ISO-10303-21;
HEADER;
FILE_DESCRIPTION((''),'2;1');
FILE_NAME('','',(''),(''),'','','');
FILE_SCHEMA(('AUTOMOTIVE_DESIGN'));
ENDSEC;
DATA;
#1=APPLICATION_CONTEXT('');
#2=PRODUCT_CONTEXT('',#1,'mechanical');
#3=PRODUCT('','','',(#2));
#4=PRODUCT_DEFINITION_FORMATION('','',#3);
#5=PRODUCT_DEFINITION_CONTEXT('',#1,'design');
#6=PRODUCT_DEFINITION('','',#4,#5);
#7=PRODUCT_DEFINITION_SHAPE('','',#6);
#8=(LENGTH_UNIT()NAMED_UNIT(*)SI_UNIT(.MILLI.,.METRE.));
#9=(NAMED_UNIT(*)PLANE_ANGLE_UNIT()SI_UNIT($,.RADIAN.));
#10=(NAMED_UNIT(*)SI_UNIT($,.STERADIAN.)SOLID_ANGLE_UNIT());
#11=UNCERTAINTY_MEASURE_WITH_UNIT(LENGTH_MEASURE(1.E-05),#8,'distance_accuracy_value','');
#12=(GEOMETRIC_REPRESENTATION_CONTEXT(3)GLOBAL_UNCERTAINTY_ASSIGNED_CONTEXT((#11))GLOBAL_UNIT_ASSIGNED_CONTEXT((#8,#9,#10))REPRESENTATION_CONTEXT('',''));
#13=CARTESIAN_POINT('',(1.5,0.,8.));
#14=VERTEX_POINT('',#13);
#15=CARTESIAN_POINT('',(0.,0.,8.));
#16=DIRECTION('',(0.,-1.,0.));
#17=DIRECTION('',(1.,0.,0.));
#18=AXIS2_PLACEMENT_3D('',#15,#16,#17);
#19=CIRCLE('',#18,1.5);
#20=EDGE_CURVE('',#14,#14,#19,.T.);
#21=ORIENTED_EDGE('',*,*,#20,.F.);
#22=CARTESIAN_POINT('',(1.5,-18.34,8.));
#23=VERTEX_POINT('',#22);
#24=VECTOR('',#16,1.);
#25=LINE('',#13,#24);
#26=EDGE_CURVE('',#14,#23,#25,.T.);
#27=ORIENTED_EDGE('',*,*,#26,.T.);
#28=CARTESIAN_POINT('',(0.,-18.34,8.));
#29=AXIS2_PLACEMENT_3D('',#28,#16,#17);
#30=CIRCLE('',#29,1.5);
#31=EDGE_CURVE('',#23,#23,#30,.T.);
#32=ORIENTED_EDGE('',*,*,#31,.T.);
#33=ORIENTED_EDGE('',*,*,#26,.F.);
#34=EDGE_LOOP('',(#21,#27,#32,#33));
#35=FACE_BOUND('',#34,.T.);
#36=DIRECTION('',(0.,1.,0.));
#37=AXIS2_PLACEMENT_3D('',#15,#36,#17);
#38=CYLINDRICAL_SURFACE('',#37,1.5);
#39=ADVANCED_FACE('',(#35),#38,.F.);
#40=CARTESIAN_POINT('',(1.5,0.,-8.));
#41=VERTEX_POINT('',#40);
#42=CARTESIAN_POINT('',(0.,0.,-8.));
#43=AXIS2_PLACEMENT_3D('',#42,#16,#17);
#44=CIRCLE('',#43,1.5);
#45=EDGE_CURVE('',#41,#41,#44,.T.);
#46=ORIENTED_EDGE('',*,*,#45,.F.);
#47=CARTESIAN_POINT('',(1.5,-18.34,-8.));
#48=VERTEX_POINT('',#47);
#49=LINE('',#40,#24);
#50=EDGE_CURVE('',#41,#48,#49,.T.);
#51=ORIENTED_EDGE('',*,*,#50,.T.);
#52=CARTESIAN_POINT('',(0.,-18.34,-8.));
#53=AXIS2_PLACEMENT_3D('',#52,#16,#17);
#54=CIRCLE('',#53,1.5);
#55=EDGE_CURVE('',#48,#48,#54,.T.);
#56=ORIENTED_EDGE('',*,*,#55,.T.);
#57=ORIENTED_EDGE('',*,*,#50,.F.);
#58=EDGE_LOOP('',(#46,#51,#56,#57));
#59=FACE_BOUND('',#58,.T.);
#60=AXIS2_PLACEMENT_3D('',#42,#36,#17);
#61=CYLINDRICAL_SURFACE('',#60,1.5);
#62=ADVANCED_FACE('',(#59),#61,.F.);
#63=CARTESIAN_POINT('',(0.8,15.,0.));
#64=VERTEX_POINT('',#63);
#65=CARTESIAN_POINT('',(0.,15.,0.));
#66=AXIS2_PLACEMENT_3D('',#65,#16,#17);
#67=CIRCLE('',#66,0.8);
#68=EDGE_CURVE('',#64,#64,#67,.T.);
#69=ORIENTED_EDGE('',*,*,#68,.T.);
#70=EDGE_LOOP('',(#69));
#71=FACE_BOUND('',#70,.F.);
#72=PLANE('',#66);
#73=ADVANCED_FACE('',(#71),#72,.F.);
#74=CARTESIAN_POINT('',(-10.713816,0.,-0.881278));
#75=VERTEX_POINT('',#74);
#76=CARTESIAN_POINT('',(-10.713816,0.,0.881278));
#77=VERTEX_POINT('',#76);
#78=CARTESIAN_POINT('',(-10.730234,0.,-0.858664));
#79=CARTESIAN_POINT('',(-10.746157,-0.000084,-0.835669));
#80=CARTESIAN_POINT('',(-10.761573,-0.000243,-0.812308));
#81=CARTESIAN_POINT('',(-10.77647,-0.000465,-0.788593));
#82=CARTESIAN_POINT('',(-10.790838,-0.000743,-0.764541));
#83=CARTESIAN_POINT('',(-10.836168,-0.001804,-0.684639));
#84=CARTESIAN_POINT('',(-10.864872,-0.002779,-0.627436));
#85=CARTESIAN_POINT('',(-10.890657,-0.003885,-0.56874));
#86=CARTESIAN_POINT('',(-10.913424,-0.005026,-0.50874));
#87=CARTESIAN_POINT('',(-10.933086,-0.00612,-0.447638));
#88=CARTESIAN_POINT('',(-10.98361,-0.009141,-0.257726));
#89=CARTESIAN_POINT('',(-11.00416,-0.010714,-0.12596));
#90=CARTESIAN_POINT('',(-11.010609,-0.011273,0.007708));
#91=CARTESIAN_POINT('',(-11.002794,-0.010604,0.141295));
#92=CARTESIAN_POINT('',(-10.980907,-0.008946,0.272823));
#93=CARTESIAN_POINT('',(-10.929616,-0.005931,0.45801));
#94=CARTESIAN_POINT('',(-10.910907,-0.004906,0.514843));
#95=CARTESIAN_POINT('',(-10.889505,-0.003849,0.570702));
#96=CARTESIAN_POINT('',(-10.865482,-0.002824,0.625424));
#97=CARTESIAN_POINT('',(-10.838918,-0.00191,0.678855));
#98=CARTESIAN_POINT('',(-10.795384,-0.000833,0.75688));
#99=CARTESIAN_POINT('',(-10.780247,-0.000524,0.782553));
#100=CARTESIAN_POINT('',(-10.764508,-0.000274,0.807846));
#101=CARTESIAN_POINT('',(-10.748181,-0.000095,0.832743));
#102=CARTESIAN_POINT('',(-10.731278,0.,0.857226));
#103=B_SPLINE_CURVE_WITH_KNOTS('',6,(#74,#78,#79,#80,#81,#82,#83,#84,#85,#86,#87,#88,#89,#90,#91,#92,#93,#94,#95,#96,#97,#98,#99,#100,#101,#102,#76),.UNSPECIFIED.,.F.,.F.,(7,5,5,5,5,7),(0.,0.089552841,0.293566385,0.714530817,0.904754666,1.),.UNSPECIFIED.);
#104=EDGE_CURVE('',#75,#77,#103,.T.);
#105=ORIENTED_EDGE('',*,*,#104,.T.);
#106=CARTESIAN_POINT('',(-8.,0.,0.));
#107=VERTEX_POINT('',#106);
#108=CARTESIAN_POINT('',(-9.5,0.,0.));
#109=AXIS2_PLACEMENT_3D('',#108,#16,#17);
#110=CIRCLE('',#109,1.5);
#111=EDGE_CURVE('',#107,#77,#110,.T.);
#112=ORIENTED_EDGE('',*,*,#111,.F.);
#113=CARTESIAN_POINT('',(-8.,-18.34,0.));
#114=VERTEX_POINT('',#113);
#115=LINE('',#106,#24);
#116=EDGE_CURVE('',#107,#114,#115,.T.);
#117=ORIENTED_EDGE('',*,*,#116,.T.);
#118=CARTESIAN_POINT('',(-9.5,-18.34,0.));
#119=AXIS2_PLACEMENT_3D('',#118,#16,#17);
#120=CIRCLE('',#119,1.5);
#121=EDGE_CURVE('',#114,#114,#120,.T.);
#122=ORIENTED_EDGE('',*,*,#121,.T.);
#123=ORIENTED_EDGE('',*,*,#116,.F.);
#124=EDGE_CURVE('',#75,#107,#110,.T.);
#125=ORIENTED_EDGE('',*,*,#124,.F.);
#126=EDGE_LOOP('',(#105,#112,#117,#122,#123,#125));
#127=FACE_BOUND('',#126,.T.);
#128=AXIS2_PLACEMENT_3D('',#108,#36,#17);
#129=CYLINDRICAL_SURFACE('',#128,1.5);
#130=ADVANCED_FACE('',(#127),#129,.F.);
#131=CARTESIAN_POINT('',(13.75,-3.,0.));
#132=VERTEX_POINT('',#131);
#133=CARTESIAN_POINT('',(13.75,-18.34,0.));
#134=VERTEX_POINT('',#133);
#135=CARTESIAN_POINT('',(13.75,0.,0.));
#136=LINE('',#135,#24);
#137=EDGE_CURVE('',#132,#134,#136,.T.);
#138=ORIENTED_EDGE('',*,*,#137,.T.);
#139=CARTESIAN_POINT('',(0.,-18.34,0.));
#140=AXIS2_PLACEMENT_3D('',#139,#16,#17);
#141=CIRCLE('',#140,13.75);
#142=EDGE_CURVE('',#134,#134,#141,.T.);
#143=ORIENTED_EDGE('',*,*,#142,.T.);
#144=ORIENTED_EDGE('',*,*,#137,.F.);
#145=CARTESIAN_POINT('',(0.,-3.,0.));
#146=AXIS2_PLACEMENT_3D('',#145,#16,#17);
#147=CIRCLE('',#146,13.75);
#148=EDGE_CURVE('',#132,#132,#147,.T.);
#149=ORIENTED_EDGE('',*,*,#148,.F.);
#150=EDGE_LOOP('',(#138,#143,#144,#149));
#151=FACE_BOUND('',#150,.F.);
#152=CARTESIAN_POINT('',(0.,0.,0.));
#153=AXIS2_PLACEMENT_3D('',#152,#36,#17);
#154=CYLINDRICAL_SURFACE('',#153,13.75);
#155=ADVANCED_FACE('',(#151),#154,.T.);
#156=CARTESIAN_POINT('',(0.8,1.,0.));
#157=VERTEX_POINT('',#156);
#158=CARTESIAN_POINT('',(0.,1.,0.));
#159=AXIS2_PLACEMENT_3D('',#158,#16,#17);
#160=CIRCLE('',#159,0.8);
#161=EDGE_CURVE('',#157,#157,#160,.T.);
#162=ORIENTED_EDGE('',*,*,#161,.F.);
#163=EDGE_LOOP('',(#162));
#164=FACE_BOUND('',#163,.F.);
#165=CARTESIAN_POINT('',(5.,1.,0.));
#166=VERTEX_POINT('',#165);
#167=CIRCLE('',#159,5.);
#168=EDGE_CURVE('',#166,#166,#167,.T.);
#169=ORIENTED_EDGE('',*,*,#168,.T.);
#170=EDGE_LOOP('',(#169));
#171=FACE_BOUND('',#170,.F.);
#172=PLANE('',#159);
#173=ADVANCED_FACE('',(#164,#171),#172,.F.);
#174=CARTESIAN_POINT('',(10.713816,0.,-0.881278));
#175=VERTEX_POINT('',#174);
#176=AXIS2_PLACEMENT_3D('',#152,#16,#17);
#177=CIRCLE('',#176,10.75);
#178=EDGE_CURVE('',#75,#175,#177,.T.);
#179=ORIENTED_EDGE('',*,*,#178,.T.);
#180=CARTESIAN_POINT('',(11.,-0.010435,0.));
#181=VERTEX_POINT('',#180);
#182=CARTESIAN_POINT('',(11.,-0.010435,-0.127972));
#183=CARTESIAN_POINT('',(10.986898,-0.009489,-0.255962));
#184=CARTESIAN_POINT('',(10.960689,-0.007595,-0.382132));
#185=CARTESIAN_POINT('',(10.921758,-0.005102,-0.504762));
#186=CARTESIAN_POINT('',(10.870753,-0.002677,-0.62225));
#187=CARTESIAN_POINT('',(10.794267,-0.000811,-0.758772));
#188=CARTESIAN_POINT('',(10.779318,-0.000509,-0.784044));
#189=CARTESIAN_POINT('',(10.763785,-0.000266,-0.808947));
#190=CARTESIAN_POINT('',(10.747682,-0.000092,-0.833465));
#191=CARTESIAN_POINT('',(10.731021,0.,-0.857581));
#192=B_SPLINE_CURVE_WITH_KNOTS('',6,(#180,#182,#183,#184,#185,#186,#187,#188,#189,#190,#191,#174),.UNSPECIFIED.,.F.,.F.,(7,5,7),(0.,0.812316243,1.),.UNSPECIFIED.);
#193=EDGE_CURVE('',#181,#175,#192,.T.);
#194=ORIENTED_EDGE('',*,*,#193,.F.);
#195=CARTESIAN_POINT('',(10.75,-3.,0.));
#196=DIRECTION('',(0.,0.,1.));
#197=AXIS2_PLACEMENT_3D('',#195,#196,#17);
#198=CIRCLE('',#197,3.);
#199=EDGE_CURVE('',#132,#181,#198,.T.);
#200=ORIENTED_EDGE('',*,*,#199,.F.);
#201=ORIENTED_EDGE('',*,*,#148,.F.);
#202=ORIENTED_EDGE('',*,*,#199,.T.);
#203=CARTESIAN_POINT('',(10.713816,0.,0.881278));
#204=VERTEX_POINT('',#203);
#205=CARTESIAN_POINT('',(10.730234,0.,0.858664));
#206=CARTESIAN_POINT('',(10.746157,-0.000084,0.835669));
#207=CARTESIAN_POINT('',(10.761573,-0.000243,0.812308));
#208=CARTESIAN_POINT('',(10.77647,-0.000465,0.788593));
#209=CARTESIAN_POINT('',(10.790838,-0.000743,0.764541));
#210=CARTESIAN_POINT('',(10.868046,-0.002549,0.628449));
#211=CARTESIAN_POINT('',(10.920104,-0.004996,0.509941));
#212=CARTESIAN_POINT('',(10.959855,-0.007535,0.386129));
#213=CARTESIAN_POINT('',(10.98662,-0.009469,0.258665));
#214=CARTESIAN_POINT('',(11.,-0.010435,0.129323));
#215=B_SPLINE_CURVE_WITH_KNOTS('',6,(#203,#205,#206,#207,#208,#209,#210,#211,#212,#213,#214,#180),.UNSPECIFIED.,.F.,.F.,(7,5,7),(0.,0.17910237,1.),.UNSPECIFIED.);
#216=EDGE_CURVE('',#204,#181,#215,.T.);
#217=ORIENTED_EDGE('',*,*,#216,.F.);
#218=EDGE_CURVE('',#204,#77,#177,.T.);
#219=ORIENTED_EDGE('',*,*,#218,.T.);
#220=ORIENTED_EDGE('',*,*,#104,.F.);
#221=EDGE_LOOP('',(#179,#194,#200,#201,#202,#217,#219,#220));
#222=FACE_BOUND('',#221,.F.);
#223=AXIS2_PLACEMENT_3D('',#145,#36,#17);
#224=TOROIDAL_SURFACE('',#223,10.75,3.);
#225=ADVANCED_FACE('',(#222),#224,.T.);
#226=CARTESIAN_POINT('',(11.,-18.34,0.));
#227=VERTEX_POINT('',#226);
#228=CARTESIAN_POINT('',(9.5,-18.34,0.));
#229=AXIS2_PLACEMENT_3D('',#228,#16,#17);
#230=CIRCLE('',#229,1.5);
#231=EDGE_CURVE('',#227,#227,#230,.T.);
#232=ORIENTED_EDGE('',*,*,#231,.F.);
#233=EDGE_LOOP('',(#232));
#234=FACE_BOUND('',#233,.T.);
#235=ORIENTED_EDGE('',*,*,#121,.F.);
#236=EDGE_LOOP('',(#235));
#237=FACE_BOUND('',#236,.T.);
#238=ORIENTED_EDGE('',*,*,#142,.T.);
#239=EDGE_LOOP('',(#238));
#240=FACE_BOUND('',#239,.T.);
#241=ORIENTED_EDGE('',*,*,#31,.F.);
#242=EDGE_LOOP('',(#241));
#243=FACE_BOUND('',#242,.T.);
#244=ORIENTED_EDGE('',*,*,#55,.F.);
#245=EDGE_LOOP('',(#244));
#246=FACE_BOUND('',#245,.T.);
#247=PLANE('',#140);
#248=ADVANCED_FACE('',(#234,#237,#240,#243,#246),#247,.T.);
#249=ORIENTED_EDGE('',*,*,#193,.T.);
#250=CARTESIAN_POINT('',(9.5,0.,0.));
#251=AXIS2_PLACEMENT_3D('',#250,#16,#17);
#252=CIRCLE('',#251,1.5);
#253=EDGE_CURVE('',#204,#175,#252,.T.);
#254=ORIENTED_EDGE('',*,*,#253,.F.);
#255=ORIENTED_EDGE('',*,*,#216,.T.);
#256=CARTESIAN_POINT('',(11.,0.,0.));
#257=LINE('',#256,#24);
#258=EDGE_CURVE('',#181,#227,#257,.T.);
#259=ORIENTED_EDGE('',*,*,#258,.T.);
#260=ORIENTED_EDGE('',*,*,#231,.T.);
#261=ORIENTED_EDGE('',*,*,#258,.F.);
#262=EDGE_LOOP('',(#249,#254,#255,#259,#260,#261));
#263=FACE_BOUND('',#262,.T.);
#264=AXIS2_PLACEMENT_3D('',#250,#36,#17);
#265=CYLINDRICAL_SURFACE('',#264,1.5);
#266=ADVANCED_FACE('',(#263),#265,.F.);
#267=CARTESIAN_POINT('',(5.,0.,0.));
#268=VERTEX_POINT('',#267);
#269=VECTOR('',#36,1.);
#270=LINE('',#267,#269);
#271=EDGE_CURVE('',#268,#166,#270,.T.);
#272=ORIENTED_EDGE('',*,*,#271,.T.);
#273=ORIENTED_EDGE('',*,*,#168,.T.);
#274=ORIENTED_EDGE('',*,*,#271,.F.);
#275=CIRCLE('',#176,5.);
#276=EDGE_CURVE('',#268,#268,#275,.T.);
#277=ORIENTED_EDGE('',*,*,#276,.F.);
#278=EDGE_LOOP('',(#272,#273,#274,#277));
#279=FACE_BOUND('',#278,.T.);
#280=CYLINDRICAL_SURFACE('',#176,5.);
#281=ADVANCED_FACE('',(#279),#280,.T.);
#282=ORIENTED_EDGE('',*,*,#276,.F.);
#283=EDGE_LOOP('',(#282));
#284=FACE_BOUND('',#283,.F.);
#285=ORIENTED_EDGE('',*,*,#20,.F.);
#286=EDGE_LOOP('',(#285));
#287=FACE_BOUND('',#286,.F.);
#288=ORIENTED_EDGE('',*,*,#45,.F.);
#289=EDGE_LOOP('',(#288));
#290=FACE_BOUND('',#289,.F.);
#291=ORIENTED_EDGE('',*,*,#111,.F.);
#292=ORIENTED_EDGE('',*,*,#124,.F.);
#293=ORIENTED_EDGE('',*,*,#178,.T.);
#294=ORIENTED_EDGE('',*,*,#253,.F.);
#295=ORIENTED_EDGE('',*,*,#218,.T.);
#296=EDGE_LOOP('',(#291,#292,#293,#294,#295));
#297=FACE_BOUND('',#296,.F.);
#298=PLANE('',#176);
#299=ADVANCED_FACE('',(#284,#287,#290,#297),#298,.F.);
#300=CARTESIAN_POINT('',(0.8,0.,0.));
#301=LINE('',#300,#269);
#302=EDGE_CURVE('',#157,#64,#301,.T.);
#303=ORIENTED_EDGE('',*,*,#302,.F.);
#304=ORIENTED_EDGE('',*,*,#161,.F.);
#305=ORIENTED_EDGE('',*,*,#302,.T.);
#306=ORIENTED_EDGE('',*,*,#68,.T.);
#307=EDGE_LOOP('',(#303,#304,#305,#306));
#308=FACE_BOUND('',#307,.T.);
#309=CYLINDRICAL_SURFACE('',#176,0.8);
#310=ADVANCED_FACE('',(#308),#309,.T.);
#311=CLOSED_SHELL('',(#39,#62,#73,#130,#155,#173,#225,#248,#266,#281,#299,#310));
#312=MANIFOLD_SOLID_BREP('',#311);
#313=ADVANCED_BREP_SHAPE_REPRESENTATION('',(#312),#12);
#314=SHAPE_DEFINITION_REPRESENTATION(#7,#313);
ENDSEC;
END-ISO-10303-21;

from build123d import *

# Parameters (mm, degrees)
F0_R     = 13.75
F0_R_2   = 1.5
F1_DEPTH = 18.34
F2_R     = 5
F3_DEPTH = 1
F4_R     = 0.8
F5_DEPTH = 15


# Not quite as in the source:
# - a fillet or chamfer that OpenCascade refuses, or shapes differently, is made with other operations: its cross-section is extruded or revolved along the edge and cut away or added


with BuildPart() as f1:
    # F0 (on Front) → F1 (new body)
    with BuildSketch(Plane.XZ):
        Circle(F0_R)
        with Locations((0, -8)):
            Circle(F0_R_2, mode=Mode.SUBTRACT)
        with Locations((-9.5, 0)):
            Circle(F0_R_2, mode=Mode.SUBTRACT)
        with Locations((9.5, 0)):
            Circle(F0_R_2, mode=Mode.SUBTRACT)
        with Locations((0, 8)):
            Circle(F0_R_2, mode=Mode.SUBTRACT)
    extrude(amount=F1_DEPTH)

    # F2 (on Front) → F3 (join)
    with BuildSketch(Plane.XZ):
        Circle(F2_R)
    extrude(amount=-F3_DEPTH)

    # F4 (on Front) → F5 (join)
    with BuildSketch(Plane.XZ):
        Circle(F4_R)
    extrude(amount=-F5_DEPTH)

    # F6: fillet of radius 3 on 1 edges, made by hand

    # F6_s1 → F6_t2 (revolve, cut)
    with BuildSketch(Plane.XY):
        with BuildLine():
            ThreePointArc((13.75, -3), (12.8713203436, -0.8786796564), (10.75, 0))
            Line((10.75, 0), (13.75, 0))
            Line((13.75, 0), (13.75, -3))
        make_face()
    revolve(axis=Axis((0, 0, 0), (0, -1, 0)), mode=Mode.SUBTRACT)


solid = f1.part
